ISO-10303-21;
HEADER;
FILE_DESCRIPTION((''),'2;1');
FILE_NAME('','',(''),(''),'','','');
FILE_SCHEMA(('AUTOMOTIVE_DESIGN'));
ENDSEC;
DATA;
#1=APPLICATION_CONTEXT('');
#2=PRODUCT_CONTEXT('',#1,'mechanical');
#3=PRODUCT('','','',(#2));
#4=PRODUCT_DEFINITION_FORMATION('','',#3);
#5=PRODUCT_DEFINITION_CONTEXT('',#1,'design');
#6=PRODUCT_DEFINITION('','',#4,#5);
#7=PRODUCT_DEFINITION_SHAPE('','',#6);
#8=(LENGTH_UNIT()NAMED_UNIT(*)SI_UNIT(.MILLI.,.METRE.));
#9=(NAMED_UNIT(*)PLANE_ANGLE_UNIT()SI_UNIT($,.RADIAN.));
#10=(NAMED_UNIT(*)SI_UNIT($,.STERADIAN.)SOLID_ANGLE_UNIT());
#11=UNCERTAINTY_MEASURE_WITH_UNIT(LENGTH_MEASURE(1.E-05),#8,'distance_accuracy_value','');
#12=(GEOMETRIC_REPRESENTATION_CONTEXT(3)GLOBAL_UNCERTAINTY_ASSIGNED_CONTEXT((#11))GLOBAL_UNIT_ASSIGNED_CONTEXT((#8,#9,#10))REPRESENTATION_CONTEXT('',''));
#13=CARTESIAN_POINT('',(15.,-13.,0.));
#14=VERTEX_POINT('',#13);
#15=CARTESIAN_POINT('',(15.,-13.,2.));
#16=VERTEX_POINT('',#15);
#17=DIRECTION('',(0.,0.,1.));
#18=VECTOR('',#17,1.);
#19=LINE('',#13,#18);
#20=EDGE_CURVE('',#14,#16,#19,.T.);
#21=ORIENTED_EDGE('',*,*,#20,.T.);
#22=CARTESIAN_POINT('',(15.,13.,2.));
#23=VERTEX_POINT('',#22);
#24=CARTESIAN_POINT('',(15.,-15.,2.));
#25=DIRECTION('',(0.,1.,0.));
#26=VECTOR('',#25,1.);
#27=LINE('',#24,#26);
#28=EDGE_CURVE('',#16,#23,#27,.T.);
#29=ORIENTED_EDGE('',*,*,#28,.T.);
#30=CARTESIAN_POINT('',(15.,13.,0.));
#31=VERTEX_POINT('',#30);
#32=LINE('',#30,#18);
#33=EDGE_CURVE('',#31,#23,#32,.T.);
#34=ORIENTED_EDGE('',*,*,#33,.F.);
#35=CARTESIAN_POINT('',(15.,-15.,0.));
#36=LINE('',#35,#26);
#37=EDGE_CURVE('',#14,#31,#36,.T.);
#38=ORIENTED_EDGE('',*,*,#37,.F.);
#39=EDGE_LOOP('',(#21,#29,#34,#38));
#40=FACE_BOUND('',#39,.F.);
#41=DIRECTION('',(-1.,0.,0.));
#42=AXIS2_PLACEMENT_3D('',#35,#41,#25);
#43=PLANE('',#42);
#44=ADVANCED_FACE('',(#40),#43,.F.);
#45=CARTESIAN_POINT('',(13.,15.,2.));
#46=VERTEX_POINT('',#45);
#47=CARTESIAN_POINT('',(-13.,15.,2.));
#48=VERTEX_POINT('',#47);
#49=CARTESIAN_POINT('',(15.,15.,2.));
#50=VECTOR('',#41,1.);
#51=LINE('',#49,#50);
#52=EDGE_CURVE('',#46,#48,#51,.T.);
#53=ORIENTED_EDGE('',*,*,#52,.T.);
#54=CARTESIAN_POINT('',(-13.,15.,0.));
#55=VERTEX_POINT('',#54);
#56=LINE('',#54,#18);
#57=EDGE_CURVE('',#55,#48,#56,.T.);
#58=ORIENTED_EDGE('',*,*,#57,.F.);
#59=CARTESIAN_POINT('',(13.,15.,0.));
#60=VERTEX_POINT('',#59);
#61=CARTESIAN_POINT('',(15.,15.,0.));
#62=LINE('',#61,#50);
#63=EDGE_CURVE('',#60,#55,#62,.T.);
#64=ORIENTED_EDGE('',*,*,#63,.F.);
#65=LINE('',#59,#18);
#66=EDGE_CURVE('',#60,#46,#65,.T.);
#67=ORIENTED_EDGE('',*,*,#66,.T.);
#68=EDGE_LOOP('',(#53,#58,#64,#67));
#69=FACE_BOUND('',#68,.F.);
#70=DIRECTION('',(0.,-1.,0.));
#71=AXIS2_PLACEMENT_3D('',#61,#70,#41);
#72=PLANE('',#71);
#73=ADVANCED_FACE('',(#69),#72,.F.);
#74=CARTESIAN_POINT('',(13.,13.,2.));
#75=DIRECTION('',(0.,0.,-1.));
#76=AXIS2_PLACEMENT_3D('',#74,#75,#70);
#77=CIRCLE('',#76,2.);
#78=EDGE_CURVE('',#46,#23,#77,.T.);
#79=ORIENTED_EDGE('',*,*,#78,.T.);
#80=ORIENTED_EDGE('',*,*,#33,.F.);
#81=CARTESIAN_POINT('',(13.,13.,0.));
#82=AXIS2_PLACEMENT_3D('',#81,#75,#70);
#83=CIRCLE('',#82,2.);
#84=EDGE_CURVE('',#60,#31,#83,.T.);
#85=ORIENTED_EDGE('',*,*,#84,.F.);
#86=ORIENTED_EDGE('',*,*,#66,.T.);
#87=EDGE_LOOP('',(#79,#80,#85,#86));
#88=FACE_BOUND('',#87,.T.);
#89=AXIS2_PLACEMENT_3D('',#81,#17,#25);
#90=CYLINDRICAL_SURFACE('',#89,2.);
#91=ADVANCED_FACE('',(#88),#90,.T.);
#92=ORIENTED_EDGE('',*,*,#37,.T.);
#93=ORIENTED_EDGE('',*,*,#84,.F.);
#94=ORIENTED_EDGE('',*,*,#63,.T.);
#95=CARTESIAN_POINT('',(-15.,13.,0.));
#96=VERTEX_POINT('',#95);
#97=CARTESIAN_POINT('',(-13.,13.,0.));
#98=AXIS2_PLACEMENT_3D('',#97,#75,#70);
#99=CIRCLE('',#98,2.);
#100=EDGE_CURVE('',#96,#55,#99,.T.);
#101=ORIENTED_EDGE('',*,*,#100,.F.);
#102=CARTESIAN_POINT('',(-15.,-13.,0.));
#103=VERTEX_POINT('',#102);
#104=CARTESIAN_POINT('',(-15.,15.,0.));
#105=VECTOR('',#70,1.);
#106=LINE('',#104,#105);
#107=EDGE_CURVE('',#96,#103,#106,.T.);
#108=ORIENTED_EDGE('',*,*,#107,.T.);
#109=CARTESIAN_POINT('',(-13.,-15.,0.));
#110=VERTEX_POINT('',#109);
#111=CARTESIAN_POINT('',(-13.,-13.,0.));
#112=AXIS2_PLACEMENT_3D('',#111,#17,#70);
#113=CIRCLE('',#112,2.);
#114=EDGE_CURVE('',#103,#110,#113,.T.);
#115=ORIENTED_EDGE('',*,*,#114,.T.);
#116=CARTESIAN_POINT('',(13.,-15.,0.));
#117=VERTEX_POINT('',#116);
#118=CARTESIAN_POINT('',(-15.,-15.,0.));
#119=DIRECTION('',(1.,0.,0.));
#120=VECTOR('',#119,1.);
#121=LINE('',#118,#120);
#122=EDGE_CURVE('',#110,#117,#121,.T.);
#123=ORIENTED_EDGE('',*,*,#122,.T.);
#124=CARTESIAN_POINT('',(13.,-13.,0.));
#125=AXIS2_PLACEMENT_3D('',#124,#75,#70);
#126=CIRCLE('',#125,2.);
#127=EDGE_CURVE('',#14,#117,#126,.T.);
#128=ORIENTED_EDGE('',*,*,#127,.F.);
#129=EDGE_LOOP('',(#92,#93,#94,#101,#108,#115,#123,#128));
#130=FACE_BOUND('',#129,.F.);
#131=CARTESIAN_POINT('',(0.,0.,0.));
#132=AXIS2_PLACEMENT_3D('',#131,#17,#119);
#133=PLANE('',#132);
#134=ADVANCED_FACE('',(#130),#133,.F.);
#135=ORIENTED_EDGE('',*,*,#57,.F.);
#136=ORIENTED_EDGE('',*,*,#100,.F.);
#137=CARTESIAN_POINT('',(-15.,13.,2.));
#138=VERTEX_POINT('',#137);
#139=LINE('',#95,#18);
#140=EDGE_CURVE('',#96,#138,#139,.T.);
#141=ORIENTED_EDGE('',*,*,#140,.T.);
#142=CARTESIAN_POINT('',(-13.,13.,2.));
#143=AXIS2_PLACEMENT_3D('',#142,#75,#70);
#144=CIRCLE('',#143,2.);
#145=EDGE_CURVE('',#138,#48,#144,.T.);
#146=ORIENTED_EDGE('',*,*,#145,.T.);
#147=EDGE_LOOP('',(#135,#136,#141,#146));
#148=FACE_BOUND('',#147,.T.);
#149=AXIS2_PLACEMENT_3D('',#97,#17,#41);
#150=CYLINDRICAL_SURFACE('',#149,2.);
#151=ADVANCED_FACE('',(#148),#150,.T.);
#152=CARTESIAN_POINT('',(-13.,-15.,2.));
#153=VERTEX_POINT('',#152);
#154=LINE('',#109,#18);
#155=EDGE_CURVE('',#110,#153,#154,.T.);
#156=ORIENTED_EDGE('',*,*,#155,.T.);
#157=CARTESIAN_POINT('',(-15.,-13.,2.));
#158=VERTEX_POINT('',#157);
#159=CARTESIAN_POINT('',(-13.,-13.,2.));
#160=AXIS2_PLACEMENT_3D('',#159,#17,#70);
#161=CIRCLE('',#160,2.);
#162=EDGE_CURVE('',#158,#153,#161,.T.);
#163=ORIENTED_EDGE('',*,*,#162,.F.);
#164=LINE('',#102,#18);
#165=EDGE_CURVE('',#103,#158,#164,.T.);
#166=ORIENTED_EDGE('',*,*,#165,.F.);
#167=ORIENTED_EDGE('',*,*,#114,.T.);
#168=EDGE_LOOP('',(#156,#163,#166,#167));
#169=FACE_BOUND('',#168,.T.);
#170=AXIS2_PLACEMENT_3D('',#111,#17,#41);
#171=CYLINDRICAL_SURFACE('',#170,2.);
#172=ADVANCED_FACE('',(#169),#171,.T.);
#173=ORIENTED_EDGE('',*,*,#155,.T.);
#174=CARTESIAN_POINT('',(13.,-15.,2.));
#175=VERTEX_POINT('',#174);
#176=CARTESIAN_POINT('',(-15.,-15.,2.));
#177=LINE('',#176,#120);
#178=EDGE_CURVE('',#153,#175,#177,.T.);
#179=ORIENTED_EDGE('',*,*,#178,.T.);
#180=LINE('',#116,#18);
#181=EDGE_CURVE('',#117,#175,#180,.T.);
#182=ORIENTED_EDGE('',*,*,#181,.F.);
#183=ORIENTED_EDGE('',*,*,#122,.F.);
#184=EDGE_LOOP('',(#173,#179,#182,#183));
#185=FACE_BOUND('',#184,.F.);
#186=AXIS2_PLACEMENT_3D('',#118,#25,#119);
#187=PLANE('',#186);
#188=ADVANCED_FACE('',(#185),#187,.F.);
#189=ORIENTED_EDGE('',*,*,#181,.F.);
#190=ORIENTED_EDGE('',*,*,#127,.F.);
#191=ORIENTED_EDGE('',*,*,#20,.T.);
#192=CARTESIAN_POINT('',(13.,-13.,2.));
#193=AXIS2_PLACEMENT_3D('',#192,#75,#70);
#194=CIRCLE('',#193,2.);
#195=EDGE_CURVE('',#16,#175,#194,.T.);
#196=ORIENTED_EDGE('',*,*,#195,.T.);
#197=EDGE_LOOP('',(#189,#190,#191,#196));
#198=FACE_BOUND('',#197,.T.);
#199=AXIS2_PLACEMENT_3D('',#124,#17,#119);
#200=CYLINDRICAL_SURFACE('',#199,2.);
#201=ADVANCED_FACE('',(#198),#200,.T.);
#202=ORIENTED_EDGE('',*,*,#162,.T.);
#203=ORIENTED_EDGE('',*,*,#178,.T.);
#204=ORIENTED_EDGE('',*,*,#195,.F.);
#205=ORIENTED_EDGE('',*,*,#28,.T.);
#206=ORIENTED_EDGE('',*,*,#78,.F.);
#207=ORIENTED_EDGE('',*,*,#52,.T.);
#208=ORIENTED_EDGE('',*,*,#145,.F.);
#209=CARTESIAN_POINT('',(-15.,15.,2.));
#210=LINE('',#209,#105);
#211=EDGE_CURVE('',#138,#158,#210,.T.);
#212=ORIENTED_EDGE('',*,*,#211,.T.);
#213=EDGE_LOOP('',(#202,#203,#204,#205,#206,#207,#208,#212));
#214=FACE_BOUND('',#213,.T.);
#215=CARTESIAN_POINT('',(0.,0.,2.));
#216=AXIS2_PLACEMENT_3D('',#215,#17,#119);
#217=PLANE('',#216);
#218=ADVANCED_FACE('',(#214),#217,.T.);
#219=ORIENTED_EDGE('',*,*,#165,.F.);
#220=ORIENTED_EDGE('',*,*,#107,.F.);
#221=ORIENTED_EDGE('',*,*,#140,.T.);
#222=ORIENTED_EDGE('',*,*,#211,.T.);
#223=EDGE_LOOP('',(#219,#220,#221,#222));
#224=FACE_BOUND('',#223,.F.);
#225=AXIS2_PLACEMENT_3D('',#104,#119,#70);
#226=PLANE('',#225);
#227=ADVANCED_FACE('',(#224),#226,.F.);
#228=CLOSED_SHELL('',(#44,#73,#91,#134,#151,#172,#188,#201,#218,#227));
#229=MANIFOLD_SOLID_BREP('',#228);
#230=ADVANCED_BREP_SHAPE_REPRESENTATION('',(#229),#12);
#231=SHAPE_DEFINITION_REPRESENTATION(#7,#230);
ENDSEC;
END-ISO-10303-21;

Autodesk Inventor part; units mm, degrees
ref_plane "YZ Plane" through (0, 0, 0) normal (1, 0, 0) x (0, 1, 0)
ref_plane "XZ Plane" through (0, 0, 0) normal (0, 1, 0) x (-1, 0, 0)
ref_plane "XY Plane" through (0, 0, 0) normal (0, 0, 1) x (1, 0, 0)
sketch "Sketch1" plane through (0, 0, 0) normal (0, 0, 1) x (1, 0, 0)
  line L0 (-15, -15) -> (15, -15)
  line L1 (15, -15) -> (15, 15)
  line L2 (15, 15) -> (-15, 15)
  line L3 (-15, 15) -> (-15, -15)
  line L4 (-15, -15) -> (15, 15) construction
  line L5 (15, -15) -> (-15, 15) construction
  point P0 (0, 0)
  dimension "d154" = 30
  dimension "d155" = 30
extrude "Plate5" add sketch "Sketch1" along normal blind 2
fillet "Corner Round1" radius 2 4 edges at (15, 15, 1) (-15, 15, 1) (-15, -15, 1) (15, -15, 1)
properties part number "SLM 1666 FDS 1000 CUP 1" material "Stainless Steel"
